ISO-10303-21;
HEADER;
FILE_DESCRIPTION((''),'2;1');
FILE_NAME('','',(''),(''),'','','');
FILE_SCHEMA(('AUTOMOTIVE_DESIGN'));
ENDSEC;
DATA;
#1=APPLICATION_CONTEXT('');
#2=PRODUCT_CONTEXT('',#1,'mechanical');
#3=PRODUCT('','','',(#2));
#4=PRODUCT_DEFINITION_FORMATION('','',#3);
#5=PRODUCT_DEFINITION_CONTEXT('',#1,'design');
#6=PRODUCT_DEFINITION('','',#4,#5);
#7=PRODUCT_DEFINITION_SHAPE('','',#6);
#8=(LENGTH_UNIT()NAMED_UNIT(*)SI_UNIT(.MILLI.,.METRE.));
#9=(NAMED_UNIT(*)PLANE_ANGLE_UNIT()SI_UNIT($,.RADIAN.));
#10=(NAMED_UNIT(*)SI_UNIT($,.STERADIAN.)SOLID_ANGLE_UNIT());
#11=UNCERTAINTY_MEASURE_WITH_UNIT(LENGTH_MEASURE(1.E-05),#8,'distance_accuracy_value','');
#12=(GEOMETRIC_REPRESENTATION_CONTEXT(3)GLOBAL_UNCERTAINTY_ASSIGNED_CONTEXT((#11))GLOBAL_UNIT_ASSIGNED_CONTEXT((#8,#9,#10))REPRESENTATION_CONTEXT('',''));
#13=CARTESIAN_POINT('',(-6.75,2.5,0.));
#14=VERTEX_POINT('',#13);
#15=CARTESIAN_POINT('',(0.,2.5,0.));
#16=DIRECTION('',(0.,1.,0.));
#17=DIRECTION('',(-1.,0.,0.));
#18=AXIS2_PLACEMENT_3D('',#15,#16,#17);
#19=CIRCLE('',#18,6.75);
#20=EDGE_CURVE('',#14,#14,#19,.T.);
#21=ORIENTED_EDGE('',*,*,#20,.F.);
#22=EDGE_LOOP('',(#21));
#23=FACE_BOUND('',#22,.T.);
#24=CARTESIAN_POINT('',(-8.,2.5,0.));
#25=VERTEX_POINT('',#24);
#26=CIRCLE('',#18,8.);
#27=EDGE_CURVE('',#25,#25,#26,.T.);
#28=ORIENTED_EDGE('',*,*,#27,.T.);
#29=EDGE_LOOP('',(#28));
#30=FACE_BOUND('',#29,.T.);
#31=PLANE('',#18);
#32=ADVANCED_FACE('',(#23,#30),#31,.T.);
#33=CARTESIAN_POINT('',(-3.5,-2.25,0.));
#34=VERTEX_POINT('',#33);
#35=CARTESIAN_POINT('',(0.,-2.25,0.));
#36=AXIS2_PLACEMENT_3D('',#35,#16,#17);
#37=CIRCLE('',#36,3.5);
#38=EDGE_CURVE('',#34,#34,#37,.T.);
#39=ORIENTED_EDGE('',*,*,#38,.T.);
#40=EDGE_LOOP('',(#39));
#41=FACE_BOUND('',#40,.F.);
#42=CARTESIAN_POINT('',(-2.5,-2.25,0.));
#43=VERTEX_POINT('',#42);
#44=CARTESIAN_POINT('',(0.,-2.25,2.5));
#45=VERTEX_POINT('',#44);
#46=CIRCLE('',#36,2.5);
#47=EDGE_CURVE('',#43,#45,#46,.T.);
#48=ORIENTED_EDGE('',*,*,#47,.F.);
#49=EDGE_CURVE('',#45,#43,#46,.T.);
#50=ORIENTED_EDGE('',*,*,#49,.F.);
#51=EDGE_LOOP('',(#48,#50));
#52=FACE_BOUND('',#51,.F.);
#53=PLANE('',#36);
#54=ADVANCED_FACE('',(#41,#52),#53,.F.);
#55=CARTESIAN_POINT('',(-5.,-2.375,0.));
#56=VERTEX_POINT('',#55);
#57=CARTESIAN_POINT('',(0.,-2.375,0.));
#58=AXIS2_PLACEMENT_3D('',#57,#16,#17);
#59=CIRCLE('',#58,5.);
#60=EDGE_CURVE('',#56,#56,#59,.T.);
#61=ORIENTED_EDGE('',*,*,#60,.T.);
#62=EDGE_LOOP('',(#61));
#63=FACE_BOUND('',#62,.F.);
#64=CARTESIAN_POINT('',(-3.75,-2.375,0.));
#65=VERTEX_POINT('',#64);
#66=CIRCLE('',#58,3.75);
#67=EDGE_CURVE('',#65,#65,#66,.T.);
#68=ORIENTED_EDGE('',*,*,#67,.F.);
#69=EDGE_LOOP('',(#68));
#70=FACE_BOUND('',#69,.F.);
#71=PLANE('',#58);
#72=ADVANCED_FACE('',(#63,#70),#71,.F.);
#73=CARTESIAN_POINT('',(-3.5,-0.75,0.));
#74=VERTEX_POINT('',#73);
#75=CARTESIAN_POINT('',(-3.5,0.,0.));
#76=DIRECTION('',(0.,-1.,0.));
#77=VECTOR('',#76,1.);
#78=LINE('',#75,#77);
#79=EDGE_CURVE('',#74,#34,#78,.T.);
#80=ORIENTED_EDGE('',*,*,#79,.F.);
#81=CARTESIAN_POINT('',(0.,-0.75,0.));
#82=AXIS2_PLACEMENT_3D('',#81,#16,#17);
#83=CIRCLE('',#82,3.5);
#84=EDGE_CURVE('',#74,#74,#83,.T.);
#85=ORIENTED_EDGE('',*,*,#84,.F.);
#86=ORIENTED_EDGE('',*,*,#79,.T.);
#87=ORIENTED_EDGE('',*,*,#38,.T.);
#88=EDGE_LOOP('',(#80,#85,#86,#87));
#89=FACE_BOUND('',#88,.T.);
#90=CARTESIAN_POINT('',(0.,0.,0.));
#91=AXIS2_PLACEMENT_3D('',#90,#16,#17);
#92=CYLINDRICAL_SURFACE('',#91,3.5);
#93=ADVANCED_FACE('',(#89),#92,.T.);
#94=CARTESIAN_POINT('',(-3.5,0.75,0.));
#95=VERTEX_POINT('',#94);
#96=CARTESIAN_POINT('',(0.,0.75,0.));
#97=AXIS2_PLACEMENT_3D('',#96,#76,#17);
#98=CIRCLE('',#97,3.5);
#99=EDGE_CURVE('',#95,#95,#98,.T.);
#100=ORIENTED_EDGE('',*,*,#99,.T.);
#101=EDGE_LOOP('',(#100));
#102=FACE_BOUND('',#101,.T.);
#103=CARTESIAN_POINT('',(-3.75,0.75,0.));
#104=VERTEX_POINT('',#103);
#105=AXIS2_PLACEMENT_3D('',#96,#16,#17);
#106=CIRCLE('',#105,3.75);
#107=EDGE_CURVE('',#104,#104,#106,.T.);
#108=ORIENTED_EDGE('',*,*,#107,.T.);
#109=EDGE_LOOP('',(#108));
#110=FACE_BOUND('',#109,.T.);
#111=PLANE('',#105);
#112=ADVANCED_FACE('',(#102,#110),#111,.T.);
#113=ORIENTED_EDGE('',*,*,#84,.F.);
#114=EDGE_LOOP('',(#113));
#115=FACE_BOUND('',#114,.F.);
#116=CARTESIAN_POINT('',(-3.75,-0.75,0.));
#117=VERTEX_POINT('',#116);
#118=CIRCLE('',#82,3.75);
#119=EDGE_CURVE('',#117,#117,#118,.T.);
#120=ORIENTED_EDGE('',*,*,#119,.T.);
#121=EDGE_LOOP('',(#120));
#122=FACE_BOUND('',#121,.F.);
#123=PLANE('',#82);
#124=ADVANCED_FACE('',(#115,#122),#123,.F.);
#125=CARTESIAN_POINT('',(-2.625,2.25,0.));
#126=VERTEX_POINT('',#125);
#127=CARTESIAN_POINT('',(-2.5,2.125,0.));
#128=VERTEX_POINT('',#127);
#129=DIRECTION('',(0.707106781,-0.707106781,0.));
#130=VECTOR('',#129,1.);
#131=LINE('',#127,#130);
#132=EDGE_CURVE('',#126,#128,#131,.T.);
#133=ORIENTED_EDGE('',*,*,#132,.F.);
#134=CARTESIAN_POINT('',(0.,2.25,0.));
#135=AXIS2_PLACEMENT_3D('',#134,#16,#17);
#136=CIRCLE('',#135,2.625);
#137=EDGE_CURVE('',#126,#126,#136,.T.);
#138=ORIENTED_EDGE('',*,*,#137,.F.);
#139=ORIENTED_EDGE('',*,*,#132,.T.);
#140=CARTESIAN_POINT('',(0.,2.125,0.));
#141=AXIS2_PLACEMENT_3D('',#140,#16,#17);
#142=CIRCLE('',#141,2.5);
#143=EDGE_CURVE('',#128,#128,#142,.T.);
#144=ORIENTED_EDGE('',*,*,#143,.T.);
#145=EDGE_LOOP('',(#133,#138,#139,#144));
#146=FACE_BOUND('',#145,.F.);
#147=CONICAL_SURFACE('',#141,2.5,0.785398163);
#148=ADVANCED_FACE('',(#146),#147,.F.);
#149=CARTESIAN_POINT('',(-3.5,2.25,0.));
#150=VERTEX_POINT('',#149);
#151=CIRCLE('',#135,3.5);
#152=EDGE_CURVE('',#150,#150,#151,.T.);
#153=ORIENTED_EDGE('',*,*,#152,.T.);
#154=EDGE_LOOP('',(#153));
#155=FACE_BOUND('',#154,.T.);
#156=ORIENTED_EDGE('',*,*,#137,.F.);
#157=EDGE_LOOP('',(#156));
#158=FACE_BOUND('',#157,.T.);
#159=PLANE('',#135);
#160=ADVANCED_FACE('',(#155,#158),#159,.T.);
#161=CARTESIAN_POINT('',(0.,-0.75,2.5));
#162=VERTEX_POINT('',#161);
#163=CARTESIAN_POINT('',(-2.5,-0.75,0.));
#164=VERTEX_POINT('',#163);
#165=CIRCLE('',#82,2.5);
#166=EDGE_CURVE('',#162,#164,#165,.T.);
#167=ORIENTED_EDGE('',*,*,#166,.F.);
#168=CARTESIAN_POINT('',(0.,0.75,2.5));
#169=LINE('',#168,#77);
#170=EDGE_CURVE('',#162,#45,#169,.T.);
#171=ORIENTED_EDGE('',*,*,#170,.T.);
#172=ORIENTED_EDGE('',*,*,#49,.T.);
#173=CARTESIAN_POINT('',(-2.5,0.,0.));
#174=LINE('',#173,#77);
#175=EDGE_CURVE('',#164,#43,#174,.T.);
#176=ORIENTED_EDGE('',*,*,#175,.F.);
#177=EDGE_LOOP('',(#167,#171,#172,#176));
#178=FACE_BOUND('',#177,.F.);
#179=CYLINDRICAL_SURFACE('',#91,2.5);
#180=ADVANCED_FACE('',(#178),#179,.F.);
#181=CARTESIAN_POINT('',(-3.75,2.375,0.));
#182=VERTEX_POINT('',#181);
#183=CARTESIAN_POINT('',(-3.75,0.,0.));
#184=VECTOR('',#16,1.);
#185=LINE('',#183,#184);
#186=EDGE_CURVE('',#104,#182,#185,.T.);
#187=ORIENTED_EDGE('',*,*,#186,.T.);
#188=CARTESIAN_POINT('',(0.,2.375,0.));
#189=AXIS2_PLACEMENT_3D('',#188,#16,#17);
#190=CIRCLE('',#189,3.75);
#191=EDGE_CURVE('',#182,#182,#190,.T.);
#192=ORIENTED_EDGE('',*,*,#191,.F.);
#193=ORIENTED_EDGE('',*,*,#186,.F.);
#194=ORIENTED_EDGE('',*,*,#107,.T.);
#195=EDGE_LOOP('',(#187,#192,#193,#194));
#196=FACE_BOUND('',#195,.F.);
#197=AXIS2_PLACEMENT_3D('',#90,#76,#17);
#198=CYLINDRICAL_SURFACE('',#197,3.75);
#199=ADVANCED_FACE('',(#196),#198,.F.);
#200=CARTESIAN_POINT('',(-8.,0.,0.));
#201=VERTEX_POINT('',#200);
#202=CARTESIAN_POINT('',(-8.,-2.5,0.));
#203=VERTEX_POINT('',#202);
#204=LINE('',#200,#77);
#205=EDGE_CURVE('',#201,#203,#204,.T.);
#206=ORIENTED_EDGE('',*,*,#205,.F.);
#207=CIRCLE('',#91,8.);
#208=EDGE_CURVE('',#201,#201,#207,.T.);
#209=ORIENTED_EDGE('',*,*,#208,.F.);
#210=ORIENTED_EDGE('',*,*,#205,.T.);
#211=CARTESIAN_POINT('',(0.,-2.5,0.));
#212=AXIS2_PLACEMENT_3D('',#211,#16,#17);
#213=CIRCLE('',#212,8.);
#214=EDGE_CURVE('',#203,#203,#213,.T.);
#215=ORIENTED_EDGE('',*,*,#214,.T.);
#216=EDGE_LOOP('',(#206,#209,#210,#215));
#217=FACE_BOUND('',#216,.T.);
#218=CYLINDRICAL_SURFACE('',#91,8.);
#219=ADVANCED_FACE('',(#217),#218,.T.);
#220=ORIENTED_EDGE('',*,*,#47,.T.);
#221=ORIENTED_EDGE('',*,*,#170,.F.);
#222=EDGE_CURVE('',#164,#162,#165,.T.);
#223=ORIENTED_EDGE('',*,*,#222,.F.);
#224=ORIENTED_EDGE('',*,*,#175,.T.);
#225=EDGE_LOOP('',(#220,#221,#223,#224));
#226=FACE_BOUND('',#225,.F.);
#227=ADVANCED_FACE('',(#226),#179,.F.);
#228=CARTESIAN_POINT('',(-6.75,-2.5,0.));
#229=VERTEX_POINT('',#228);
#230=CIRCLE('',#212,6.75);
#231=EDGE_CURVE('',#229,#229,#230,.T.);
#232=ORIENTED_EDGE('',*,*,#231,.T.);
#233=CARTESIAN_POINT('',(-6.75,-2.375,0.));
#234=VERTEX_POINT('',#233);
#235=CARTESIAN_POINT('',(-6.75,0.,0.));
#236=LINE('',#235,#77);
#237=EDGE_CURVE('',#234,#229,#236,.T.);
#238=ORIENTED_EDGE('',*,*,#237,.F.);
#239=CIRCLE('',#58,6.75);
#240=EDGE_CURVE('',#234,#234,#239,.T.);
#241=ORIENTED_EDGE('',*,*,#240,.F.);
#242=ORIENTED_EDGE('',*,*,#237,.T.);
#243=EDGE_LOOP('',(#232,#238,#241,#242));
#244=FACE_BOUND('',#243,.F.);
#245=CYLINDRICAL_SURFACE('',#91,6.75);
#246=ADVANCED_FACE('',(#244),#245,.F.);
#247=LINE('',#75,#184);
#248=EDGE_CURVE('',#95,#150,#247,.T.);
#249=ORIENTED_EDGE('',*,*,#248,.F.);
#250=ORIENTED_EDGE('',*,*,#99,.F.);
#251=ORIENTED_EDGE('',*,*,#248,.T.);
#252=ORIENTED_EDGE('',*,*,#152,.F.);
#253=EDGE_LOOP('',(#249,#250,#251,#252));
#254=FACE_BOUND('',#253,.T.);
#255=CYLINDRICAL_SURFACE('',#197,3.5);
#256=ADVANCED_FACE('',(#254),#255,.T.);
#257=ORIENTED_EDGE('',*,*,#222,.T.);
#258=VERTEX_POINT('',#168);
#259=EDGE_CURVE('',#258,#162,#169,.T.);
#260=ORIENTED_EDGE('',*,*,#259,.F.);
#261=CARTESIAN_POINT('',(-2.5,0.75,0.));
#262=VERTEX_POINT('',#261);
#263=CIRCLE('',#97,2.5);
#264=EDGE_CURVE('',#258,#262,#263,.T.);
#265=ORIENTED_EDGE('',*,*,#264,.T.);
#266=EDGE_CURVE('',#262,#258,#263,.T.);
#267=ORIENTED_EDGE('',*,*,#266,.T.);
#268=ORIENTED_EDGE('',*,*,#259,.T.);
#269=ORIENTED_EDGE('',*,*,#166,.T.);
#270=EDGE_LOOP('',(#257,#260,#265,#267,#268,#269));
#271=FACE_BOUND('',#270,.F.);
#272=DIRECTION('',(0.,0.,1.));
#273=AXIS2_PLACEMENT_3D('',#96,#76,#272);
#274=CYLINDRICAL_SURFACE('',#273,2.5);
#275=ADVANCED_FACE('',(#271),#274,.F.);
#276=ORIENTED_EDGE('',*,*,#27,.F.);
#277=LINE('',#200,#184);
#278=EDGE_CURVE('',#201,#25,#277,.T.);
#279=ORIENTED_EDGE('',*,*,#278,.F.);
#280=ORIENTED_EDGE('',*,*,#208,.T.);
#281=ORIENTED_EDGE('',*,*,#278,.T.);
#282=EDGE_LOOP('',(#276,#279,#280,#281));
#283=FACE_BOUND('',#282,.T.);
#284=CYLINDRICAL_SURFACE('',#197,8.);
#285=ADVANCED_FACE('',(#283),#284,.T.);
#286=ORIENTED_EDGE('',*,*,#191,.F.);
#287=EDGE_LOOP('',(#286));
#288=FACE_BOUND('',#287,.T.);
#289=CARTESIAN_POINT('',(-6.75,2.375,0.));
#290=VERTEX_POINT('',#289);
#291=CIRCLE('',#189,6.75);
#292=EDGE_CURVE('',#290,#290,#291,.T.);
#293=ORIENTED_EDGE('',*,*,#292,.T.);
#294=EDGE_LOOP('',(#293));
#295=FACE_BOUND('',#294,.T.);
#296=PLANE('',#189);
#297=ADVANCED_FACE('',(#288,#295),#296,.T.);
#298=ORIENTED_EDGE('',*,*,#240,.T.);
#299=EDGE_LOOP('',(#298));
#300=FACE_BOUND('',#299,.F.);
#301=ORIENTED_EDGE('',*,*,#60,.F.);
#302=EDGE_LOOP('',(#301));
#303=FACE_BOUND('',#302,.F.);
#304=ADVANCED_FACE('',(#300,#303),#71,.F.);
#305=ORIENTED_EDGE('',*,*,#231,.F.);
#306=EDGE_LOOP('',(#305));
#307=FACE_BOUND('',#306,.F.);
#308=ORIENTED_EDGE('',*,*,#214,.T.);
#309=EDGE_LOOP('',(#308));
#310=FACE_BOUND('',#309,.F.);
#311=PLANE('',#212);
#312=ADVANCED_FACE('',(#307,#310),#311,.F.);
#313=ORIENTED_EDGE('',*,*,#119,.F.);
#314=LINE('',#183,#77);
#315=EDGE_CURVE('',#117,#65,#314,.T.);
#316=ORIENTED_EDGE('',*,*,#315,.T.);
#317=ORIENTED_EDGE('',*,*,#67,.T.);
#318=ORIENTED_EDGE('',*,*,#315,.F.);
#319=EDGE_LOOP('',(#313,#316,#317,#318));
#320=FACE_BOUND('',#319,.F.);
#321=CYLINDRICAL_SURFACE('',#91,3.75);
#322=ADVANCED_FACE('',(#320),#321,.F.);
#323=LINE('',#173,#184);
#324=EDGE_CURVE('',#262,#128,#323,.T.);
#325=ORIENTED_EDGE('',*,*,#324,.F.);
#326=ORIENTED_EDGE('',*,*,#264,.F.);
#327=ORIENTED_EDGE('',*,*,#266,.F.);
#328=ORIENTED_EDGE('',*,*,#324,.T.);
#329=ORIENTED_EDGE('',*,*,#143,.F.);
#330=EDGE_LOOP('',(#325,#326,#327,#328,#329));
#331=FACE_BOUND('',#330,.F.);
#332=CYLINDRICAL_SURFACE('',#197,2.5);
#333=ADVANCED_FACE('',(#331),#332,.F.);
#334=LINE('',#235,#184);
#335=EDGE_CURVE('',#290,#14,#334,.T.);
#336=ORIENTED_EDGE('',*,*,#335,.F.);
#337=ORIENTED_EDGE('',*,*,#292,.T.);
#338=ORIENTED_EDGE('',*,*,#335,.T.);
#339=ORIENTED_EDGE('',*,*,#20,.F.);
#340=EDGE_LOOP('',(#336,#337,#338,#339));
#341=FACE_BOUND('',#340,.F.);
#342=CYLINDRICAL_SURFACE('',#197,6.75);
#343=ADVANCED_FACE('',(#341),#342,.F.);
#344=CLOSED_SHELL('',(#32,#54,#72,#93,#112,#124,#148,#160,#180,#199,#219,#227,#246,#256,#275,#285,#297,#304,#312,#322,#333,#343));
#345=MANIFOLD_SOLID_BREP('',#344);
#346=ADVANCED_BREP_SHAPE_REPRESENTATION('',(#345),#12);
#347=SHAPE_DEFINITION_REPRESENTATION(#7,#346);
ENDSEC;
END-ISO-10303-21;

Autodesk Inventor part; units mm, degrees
ref_plane "YZ Plane" through (0, 0, 0) normal (1, 0, 0) x (0, 1, 0)
ref_plane "XZ Plane" through (0, 0, 0) normal (0, 1, 0) x (-1, 0, 0)
ref_plane "XY Plane" through (0, 0, 0) normal (0, 0, 1) x (1, 0, 0)
sketch "Szkic1" plane through (0, 0, 0) normal (0, 1, 0) x (-1, 0, 0)
  circle A0 centre (0, 0) radius 2.5
  circle A1 centre (0, 0) radius 8
  circle A2 centre (0, 0) radius 3.5
  circle A3 centre (0, 0) radius 3.5
  circle A4 centre (0, 0) radius 6.75
  circle A5 centre (0, 0) radius 5
  circle A6 centre (0, 0) radius 3.75
  dimension "d0" = 5
  dimension "d1" = 16
  dimension "d2" = 7
  dimension "d3" = 7
  dimension "d4" = 13.5
  dimension "d13" = 10
  dimension "d16" = 7.5
extrude "Wyciągnięcie proste7" add sketch "Szkic1" along normal mid plane 4.5 contours A2
extrude "Wyciągnięcie proste8" add sketch "Szkic1" along normal mid plane 4.75 contours A5
extrude "Wyciągnięcie proste9" add sketch "Szkic1" along normal mid plane 1.5 contours A0 | A2 | A6
extrude "Wyciągnięcie proste10" add sketch "Szkic1" along normal mid plane 5 contours A1
extrude "Wyciągnięcie proste11" add sketch "Szkic1" along normal mid plane 4.75 contours A4
sketch "Szkic2" plane through (0, 0.75, 0) normal (0, 1, 0) x (1, 0, 0)
  point P0 (0, 0)
  point P1 (0.0085, 0.051)
hole "Otwór3" at (0, 0.75, 0) direction (0, -1, 0) diameter 5 end through all
chamfer "Faza3" distance 0.125 angle 45 1 edges at (2.5, 2.25, 0)
properties part number "lozysko_CPY"
